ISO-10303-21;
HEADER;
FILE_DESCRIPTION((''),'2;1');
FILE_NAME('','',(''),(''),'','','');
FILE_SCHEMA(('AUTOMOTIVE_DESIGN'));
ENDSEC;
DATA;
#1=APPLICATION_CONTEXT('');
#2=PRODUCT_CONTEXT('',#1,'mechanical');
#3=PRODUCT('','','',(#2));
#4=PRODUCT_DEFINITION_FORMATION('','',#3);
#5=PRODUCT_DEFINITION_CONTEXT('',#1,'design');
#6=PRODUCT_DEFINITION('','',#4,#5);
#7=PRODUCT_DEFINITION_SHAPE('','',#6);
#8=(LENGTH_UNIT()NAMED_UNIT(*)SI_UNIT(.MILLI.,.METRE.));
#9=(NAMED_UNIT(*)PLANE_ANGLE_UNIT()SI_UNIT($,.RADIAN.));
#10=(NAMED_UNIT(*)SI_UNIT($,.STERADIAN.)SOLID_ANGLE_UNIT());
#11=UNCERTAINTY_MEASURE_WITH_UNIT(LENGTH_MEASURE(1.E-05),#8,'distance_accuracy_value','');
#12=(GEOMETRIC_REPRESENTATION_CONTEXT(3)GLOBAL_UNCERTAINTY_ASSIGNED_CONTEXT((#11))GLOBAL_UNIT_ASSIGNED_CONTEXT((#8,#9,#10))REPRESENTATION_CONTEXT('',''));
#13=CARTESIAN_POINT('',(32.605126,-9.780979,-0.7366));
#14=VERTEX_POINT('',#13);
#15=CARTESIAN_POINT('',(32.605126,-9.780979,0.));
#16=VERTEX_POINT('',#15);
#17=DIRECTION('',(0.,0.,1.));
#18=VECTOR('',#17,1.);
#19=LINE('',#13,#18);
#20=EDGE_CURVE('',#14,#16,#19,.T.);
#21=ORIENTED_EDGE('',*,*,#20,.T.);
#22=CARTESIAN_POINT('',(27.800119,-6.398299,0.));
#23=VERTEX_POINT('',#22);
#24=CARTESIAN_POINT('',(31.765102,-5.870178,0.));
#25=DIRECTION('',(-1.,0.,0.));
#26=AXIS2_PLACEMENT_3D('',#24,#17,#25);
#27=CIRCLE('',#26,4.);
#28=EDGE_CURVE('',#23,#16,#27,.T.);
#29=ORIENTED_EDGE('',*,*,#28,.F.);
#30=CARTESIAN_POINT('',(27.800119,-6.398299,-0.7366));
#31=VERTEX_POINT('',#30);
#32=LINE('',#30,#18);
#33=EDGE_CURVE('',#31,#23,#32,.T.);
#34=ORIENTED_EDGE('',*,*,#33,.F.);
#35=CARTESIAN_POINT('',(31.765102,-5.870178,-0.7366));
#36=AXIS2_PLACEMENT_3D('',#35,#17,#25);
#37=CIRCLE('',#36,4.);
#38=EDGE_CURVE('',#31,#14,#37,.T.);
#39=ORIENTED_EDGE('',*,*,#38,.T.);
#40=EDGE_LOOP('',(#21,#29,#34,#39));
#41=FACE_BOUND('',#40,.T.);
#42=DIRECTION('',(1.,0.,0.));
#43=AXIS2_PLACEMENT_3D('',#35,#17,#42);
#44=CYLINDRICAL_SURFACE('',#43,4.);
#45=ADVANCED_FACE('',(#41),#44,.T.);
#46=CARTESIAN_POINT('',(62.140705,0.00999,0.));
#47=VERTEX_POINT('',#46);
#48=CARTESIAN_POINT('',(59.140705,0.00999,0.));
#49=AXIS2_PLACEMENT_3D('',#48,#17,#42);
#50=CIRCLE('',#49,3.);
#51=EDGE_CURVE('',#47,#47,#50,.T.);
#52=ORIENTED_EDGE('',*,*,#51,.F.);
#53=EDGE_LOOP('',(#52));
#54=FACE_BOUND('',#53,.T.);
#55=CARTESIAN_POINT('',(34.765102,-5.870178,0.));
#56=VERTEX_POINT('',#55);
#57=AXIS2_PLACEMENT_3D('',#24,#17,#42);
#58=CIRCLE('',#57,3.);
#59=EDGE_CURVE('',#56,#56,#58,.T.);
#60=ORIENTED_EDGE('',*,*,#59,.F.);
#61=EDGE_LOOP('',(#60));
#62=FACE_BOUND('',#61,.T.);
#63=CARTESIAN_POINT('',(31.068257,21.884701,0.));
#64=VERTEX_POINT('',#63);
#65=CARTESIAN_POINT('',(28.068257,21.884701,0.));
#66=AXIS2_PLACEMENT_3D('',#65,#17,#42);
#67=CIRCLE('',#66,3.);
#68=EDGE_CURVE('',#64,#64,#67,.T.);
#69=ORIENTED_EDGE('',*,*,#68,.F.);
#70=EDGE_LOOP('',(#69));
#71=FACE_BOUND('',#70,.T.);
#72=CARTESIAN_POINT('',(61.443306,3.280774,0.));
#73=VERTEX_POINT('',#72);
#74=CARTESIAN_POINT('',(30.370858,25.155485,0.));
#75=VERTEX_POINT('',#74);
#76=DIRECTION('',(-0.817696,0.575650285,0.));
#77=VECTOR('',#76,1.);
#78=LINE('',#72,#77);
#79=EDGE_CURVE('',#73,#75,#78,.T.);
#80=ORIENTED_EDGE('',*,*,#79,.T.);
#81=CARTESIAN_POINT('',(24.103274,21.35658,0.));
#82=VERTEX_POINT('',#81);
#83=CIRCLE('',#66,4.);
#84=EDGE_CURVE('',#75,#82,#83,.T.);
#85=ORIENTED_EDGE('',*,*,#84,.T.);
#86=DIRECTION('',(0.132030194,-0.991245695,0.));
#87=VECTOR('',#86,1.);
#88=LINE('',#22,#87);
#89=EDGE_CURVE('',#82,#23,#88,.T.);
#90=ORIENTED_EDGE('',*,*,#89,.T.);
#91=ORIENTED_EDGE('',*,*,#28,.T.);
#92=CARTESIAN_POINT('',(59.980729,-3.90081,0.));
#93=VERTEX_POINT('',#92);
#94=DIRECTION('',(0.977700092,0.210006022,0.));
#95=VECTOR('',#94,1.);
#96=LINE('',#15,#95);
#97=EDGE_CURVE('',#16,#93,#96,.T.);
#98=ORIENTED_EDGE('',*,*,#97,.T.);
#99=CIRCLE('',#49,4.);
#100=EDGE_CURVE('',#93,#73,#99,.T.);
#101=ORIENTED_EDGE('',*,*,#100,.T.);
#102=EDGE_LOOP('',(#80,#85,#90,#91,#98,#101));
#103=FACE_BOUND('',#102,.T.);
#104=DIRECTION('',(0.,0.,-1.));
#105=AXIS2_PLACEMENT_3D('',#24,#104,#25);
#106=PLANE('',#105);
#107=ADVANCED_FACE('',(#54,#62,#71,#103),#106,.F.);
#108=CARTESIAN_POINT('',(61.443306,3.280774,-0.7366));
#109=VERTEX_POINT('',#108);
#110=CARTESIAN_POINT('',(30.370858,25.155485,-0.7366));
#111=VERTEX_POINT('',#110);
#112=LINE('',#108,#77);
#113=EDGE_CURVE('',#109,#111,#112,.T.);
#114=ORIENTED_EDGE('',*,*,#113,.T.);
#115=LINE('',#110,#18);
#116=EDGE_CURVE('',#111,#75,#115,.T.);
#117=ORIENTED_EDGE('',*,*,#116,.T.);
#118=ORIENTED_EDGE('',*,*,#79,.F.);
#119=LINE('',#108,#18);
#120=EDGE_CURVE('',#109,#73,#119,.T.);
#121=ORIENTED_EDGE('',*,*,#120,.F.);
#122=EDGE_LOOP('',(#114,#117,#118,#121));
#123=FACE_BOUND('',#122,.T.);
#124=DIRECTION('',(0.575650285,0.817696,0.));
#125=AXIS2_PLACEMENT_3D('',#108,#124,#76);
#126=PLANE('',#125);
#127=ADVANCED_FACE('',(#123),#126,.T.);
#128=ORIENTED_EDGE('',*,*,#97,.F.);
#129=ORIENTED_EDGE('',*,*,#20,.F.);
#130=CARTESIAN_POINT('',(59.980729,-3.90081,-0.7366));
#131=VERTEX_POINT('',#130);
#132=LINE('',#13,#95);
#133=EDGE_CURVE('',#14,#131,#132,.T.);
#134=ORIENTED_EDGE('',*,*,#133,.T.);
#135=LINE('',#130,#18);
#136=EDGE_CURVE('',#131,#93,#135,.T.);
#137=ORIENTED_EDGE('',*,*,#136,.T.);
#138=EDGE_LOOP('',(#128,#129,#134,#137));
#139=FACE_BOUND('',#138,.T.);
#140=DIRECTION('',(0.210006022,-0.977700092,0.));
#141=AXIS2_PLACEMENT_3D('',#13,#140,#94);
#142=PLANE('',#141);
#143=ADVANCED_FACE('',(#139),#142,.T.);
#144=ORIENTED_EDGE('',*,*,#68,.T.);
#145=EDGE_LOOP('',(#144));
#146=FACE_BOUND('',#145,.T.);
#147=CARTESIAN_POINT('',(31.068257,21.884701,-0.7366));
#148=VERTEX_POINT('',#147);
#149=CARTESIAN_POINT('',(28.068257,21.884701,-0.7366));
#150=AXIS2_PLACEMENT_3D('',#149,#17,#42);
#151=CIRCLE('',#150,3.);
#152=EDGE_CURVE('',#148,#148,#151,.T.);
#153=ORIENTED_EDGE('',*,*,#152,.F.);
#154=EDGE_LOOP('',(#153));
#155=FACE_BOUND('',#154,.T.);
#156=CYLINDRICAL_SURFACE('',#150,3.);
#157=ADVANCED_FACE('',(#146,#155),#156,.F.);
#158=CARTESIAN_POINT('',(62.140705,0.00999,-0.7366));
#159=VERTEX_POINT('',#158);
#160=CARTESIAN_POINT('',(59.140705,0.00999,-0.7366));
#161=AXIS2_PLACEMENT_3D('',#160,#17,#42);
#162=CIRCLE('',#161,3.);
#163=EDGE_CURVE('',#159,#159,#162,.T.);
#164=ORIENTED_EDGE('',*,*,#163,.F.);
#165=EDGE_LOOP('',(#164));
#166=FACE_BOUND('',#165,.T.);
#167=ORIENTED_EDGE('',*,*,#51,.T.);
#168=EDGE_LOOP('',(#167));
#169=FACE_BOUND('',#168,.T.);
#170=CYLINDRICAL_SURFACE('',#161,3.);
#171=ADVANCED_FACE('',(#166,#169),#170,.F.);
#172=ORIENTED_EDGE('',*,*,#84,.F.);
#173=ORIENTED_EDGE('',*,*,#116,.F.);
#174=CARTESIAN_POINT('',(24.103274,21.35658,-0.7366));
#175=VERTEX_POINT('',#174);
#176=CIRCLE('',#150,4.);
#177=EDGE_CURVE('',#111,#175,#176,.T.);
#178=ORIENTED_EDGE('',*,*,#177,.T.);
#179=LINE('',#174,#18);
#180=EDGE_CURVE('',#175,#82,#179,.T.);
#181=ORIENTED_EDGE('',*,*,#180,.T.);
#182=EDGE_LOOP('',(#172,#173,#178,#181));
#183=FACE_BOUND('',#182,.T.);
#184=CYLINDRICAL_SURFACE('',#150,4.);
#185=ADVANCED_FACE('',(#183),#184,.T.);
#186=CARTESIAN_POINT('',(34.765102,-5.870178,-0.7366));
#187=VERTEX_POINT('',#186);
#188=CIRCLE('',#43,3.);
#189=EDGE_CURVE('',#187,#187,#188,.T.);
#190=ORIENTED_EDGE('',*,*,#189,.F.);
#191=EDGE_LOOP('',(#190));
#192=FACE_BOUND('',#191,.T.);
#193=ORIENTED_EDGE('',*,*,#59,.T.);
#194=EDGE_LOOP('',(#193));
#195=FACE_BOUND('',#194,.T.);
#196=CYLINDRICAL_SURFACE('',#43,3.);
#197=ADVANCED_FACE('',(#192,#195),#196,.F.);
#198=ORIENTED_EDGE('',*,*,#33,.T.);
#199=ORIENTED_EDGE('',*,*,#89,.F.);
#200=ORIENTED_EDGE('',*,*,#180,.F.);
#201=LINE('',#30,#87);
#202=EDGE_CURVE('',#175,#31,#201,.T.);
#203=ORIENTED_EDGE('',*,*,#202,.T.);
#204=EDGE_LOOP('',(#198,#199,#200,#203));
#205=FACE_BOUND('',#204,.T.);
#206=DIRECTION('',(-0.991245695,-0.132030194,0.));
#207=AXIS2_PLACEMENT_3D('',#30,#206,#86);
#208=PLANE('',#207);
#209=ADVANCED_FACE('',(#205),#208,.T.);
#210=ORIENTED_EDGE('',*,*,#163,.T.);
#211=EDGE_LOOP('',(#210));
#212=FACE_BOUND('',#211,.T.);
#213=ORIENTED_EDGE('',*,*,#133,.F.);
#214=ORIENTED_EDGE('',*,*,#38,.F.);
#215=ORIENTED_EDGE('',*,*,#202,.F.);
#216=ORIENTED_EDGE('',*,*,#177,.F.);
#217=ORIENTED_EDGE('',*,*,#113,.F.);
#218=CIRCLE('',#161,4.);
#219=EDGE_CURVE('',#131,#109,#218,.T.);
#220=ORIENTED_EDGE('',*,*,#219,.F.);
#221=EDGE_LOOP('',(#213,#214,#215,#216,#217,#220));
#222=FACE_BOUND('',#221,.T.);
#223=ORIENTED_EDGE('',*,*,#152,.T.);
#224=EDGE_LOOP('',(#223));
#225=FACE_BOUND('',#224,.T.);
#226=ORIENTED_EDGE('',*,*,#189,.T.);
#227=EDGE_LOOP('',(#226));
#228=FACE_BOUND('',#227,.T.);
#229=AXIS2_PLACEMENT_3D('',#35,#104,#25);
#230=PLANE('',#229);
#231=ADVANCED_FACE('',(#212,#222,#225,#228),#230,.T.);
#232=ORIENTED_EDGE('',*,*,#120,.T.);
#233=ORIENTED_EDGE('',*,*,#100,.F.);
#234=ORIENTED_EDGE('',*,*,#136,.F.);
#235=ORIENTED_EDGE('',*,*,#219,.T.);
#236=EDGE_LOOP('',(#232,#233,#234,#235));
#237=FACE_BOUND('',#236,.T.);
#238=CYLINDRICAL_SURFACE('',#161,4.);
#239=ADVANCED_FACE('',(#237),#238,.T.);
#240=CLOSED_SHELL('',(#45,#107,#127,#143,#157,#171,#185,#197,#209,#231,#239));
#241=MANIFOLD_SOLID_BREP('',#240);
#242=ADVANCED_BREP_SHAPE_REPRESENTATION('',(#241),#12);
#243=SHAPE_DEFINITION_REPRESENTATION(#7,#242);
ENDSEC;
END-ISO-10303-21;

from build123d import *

# Parameters (mm, degrees)
ESQUISSE1_R               = 3
T_LE_DE_BASE_PLI_E1_DEPTH = 0.7366


# Sheet-metal steps are written as plain solids
with BuildPart() as part:
    # Esquisse1 → Tôle de base pliée1 (new body)
    with BuildSketch(Plane.XY):
        with BuildLine():
            Line((32.6051263, -9.780978848), (59.980728888, -3.900810235))
            ThreePointArc((59.980728888, -3.900810235), (63.060247102, -0.788250523), (61.443305942, 3.280774136))
            Line((61.443305942, 3.280774136), (30.370857933, 25.155484984))
            ThreePointArc((30.370857933, 25.155484984), (25.994902612, 25.305403023), (24.103274011, 21.356580209))
            Line((24.103274011, 21.356580209), (27.800119432, -6.398299253))
            ThreePointArc((27.800119432, -6.398299253), (29.46250107, -9.14096248), (32.6051263, -9.780978848))
        make_face()
        with Locations((28.068256791, 21.884700983)):
            Circle(ESQUISSE1_R, mode=Mode.SUBTRACT)
        with Locations((31.765102212, -5.870178479)):
            Circle(ESQUISSE1_R, mode=Mode.SUBTRACT)
        with Locations((59.1407048, 0.009990135)):
            Circle(ESQUISSE1_R, mode=Mode.SUBTRACT)
    extrude(amount=-T_LE_DE_BASE_PLI_E1_DEPTH)


solid = part.part
